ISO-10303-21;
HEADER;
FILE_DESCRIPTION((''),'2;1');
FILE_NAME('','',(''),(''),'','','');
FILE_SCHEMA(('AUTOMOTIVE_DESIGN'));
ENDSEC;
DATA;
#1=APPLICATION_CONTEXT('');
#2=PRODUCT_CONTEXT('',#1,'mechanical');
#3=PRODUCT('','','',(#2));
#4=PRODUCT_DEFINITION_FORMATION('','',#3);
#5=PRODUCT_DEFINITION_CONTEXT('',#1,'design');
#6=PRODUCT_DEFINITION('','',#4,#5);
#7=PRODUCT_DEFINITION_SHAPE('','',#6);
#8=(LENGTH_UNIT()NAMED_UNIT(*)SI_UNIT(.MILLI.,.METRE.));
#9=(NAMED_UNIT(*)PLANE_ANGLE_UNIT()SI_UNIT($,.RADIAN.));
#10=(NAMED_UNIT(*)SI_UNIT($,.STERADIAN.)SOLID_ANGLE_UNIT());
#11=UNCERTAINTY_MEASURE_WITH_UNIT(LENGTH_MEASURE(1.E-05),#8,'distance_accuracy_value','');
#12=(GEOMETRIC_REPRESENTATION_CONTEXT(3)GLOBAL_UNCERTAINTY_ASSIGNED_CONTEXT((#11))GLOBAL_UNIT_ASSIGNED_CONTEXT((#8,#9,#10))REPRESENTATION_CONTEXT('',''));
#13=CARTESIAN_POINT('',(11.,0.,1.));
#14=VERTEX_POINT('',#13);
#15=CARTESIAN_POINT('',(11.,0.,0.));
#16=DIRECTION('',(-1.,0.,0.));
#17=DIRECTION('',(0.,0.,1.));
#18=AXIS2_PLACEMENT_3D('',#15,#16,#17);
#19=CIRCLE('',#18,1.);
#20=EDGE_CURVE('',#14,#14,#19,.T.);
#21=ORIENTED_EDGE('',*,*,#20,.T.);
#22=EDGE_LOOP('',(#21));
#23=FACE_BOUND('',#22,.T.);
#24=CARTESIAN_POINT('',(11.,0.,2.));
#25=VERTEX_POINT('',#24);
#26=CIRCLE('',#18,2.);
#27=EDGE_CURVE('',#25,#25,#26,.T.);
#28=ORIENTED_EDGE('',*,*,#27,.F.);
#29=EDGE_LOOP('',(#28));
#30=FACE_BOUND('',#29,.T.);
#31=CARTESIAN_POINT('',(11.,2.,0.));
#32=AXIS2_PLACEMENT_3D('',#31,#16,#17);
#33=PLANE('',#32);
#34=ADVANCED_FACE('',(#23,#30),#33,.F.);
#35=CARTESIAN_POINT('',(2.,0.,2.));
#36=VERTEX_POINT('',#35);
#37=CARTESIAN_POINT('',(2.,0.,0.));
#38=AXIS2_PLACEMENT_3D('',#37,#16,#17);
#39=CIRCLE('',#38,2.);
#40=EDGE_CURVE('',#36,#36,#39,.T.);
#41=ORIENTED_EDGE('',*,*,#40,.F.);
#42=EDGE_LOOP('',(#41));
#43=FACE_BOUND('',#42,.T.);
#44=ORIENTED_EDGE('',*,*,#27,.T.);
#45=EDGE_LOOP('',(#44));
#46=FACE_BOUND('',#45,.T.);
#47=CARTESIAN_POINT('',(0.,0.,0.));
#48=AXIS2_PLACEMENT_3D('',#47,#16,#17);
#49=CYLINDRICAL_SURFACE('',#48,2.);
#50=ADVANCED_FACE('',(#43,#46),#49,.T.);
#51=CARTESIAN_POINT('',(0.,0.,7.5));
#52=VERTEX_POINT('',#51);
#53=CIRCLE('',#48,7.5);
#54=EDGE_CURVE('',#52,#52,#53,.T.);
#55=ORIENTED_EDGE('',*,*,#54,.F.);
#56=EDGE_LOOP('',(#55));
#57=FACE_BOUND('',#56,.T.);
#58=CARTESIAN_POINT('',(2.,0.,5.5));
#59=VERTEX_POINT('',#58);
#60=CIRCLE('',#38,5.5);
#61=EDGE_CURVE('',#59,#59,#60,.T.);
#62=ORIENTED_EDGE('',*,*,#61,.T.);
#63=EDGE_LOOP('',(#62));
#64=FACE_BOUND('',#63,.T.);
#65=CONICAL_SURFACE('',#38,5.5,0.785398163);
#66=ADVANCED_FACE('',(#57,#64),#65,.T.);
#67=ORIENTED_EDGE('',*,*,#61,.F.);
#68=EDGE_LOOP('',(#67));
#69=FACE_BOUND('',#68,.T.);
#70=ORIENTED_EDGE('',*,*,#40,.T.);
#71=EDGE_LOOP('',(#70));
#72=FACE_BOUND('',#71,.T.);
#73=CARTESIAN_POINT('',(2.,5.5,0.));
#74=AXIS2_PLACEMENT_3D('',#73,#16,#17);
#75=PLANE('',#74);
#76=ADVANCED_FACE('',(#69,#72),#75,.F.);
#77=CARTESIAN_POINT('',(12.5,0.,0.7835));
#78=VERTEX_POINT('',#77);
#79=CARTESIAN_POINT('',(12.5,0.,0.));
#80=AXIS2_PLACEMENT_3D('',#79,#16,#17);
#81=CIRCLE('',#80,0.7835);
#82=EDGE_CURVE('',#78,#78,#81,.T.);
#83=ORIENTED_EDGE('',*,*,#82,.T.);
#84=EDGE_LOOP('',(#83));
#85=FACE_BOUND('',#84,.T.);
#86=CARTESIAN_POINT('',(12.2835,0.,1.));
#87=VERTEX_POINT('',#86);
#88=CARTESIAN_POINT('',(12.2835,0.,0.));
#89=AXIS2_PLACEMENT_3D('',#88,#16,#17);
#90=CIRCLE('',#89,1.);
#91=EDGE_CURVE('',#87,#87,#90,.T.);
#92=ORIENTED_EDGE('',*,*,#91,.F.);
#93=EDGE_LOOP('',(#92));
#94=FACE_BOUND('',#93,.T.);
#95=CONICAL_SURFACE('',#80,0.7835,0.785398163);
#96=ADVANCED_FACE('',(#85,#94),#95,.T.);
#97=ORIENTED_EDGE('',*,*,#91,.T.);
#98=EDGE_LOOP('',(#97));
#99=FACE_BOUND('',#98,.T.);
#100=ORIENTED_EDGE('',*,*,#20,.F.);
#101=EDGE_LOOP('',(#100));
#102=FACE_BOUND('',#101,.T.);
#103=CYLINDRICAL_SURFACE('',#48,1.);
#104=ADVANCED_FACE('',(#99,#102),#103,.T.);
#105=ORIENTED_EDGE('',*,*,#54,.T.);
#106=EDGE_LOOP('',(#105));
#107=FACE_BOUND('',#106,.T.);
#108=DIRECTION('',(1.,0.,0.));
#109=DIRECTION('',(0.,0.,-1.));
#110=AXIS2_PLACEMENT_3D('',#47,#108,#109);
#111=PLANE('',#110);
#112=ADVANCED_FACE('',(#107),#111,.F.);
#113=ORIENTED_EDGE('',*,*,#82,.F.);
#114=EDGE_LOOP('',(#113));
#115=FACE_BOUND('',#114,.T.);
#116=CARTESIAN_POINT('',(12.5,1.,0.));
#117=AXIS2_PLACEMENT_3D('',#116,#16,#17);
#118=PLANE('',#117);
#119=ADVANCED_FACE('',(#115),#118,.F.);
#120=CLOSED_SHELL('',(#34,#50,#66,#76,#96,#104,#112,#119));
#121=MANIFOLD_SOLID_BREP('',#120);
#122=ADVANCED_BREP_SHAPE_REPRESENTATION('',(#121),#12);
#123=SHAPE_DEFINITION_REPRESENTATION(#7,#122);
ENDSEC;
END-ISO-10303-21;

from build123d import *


# Read off the part's stored shape, not the designer's step: M2 机械螺纹 螺柱1
with BuildPart() as part:
    # 草图1 → 旋转1 (revolve)
    with BuildSketch(Plane.XY, mode=Mode.PRIVATE) as revolve_1_sk:
        Polygon((0, 0), (0, 7.5), (2, 5.5), (2, 2), (11, 2), (11, 1), (12.5, 1), (12.5, 0), align=None)
    revolve(revolve_1_sk.sketch.rotate(Axis((0, 0, 0), (1, 0, 0)), 90), axis=Axis((0, 0, 0), (1, 0, 0)))

    # M2 机械螺纹 螺柱1 outline → M2 机械螺纹 螺柱1 (revolve, cut)
    with BuildSketch(Plane.YX):
        Polygon((1, 12.5), (0.7835, 12.5), (1, 12.2835), align=None)
    revolve(axis=Axis((0, 0, 0), (1, 0, 0)), mode=Mode.SUBTRACT)


solid = part.part
